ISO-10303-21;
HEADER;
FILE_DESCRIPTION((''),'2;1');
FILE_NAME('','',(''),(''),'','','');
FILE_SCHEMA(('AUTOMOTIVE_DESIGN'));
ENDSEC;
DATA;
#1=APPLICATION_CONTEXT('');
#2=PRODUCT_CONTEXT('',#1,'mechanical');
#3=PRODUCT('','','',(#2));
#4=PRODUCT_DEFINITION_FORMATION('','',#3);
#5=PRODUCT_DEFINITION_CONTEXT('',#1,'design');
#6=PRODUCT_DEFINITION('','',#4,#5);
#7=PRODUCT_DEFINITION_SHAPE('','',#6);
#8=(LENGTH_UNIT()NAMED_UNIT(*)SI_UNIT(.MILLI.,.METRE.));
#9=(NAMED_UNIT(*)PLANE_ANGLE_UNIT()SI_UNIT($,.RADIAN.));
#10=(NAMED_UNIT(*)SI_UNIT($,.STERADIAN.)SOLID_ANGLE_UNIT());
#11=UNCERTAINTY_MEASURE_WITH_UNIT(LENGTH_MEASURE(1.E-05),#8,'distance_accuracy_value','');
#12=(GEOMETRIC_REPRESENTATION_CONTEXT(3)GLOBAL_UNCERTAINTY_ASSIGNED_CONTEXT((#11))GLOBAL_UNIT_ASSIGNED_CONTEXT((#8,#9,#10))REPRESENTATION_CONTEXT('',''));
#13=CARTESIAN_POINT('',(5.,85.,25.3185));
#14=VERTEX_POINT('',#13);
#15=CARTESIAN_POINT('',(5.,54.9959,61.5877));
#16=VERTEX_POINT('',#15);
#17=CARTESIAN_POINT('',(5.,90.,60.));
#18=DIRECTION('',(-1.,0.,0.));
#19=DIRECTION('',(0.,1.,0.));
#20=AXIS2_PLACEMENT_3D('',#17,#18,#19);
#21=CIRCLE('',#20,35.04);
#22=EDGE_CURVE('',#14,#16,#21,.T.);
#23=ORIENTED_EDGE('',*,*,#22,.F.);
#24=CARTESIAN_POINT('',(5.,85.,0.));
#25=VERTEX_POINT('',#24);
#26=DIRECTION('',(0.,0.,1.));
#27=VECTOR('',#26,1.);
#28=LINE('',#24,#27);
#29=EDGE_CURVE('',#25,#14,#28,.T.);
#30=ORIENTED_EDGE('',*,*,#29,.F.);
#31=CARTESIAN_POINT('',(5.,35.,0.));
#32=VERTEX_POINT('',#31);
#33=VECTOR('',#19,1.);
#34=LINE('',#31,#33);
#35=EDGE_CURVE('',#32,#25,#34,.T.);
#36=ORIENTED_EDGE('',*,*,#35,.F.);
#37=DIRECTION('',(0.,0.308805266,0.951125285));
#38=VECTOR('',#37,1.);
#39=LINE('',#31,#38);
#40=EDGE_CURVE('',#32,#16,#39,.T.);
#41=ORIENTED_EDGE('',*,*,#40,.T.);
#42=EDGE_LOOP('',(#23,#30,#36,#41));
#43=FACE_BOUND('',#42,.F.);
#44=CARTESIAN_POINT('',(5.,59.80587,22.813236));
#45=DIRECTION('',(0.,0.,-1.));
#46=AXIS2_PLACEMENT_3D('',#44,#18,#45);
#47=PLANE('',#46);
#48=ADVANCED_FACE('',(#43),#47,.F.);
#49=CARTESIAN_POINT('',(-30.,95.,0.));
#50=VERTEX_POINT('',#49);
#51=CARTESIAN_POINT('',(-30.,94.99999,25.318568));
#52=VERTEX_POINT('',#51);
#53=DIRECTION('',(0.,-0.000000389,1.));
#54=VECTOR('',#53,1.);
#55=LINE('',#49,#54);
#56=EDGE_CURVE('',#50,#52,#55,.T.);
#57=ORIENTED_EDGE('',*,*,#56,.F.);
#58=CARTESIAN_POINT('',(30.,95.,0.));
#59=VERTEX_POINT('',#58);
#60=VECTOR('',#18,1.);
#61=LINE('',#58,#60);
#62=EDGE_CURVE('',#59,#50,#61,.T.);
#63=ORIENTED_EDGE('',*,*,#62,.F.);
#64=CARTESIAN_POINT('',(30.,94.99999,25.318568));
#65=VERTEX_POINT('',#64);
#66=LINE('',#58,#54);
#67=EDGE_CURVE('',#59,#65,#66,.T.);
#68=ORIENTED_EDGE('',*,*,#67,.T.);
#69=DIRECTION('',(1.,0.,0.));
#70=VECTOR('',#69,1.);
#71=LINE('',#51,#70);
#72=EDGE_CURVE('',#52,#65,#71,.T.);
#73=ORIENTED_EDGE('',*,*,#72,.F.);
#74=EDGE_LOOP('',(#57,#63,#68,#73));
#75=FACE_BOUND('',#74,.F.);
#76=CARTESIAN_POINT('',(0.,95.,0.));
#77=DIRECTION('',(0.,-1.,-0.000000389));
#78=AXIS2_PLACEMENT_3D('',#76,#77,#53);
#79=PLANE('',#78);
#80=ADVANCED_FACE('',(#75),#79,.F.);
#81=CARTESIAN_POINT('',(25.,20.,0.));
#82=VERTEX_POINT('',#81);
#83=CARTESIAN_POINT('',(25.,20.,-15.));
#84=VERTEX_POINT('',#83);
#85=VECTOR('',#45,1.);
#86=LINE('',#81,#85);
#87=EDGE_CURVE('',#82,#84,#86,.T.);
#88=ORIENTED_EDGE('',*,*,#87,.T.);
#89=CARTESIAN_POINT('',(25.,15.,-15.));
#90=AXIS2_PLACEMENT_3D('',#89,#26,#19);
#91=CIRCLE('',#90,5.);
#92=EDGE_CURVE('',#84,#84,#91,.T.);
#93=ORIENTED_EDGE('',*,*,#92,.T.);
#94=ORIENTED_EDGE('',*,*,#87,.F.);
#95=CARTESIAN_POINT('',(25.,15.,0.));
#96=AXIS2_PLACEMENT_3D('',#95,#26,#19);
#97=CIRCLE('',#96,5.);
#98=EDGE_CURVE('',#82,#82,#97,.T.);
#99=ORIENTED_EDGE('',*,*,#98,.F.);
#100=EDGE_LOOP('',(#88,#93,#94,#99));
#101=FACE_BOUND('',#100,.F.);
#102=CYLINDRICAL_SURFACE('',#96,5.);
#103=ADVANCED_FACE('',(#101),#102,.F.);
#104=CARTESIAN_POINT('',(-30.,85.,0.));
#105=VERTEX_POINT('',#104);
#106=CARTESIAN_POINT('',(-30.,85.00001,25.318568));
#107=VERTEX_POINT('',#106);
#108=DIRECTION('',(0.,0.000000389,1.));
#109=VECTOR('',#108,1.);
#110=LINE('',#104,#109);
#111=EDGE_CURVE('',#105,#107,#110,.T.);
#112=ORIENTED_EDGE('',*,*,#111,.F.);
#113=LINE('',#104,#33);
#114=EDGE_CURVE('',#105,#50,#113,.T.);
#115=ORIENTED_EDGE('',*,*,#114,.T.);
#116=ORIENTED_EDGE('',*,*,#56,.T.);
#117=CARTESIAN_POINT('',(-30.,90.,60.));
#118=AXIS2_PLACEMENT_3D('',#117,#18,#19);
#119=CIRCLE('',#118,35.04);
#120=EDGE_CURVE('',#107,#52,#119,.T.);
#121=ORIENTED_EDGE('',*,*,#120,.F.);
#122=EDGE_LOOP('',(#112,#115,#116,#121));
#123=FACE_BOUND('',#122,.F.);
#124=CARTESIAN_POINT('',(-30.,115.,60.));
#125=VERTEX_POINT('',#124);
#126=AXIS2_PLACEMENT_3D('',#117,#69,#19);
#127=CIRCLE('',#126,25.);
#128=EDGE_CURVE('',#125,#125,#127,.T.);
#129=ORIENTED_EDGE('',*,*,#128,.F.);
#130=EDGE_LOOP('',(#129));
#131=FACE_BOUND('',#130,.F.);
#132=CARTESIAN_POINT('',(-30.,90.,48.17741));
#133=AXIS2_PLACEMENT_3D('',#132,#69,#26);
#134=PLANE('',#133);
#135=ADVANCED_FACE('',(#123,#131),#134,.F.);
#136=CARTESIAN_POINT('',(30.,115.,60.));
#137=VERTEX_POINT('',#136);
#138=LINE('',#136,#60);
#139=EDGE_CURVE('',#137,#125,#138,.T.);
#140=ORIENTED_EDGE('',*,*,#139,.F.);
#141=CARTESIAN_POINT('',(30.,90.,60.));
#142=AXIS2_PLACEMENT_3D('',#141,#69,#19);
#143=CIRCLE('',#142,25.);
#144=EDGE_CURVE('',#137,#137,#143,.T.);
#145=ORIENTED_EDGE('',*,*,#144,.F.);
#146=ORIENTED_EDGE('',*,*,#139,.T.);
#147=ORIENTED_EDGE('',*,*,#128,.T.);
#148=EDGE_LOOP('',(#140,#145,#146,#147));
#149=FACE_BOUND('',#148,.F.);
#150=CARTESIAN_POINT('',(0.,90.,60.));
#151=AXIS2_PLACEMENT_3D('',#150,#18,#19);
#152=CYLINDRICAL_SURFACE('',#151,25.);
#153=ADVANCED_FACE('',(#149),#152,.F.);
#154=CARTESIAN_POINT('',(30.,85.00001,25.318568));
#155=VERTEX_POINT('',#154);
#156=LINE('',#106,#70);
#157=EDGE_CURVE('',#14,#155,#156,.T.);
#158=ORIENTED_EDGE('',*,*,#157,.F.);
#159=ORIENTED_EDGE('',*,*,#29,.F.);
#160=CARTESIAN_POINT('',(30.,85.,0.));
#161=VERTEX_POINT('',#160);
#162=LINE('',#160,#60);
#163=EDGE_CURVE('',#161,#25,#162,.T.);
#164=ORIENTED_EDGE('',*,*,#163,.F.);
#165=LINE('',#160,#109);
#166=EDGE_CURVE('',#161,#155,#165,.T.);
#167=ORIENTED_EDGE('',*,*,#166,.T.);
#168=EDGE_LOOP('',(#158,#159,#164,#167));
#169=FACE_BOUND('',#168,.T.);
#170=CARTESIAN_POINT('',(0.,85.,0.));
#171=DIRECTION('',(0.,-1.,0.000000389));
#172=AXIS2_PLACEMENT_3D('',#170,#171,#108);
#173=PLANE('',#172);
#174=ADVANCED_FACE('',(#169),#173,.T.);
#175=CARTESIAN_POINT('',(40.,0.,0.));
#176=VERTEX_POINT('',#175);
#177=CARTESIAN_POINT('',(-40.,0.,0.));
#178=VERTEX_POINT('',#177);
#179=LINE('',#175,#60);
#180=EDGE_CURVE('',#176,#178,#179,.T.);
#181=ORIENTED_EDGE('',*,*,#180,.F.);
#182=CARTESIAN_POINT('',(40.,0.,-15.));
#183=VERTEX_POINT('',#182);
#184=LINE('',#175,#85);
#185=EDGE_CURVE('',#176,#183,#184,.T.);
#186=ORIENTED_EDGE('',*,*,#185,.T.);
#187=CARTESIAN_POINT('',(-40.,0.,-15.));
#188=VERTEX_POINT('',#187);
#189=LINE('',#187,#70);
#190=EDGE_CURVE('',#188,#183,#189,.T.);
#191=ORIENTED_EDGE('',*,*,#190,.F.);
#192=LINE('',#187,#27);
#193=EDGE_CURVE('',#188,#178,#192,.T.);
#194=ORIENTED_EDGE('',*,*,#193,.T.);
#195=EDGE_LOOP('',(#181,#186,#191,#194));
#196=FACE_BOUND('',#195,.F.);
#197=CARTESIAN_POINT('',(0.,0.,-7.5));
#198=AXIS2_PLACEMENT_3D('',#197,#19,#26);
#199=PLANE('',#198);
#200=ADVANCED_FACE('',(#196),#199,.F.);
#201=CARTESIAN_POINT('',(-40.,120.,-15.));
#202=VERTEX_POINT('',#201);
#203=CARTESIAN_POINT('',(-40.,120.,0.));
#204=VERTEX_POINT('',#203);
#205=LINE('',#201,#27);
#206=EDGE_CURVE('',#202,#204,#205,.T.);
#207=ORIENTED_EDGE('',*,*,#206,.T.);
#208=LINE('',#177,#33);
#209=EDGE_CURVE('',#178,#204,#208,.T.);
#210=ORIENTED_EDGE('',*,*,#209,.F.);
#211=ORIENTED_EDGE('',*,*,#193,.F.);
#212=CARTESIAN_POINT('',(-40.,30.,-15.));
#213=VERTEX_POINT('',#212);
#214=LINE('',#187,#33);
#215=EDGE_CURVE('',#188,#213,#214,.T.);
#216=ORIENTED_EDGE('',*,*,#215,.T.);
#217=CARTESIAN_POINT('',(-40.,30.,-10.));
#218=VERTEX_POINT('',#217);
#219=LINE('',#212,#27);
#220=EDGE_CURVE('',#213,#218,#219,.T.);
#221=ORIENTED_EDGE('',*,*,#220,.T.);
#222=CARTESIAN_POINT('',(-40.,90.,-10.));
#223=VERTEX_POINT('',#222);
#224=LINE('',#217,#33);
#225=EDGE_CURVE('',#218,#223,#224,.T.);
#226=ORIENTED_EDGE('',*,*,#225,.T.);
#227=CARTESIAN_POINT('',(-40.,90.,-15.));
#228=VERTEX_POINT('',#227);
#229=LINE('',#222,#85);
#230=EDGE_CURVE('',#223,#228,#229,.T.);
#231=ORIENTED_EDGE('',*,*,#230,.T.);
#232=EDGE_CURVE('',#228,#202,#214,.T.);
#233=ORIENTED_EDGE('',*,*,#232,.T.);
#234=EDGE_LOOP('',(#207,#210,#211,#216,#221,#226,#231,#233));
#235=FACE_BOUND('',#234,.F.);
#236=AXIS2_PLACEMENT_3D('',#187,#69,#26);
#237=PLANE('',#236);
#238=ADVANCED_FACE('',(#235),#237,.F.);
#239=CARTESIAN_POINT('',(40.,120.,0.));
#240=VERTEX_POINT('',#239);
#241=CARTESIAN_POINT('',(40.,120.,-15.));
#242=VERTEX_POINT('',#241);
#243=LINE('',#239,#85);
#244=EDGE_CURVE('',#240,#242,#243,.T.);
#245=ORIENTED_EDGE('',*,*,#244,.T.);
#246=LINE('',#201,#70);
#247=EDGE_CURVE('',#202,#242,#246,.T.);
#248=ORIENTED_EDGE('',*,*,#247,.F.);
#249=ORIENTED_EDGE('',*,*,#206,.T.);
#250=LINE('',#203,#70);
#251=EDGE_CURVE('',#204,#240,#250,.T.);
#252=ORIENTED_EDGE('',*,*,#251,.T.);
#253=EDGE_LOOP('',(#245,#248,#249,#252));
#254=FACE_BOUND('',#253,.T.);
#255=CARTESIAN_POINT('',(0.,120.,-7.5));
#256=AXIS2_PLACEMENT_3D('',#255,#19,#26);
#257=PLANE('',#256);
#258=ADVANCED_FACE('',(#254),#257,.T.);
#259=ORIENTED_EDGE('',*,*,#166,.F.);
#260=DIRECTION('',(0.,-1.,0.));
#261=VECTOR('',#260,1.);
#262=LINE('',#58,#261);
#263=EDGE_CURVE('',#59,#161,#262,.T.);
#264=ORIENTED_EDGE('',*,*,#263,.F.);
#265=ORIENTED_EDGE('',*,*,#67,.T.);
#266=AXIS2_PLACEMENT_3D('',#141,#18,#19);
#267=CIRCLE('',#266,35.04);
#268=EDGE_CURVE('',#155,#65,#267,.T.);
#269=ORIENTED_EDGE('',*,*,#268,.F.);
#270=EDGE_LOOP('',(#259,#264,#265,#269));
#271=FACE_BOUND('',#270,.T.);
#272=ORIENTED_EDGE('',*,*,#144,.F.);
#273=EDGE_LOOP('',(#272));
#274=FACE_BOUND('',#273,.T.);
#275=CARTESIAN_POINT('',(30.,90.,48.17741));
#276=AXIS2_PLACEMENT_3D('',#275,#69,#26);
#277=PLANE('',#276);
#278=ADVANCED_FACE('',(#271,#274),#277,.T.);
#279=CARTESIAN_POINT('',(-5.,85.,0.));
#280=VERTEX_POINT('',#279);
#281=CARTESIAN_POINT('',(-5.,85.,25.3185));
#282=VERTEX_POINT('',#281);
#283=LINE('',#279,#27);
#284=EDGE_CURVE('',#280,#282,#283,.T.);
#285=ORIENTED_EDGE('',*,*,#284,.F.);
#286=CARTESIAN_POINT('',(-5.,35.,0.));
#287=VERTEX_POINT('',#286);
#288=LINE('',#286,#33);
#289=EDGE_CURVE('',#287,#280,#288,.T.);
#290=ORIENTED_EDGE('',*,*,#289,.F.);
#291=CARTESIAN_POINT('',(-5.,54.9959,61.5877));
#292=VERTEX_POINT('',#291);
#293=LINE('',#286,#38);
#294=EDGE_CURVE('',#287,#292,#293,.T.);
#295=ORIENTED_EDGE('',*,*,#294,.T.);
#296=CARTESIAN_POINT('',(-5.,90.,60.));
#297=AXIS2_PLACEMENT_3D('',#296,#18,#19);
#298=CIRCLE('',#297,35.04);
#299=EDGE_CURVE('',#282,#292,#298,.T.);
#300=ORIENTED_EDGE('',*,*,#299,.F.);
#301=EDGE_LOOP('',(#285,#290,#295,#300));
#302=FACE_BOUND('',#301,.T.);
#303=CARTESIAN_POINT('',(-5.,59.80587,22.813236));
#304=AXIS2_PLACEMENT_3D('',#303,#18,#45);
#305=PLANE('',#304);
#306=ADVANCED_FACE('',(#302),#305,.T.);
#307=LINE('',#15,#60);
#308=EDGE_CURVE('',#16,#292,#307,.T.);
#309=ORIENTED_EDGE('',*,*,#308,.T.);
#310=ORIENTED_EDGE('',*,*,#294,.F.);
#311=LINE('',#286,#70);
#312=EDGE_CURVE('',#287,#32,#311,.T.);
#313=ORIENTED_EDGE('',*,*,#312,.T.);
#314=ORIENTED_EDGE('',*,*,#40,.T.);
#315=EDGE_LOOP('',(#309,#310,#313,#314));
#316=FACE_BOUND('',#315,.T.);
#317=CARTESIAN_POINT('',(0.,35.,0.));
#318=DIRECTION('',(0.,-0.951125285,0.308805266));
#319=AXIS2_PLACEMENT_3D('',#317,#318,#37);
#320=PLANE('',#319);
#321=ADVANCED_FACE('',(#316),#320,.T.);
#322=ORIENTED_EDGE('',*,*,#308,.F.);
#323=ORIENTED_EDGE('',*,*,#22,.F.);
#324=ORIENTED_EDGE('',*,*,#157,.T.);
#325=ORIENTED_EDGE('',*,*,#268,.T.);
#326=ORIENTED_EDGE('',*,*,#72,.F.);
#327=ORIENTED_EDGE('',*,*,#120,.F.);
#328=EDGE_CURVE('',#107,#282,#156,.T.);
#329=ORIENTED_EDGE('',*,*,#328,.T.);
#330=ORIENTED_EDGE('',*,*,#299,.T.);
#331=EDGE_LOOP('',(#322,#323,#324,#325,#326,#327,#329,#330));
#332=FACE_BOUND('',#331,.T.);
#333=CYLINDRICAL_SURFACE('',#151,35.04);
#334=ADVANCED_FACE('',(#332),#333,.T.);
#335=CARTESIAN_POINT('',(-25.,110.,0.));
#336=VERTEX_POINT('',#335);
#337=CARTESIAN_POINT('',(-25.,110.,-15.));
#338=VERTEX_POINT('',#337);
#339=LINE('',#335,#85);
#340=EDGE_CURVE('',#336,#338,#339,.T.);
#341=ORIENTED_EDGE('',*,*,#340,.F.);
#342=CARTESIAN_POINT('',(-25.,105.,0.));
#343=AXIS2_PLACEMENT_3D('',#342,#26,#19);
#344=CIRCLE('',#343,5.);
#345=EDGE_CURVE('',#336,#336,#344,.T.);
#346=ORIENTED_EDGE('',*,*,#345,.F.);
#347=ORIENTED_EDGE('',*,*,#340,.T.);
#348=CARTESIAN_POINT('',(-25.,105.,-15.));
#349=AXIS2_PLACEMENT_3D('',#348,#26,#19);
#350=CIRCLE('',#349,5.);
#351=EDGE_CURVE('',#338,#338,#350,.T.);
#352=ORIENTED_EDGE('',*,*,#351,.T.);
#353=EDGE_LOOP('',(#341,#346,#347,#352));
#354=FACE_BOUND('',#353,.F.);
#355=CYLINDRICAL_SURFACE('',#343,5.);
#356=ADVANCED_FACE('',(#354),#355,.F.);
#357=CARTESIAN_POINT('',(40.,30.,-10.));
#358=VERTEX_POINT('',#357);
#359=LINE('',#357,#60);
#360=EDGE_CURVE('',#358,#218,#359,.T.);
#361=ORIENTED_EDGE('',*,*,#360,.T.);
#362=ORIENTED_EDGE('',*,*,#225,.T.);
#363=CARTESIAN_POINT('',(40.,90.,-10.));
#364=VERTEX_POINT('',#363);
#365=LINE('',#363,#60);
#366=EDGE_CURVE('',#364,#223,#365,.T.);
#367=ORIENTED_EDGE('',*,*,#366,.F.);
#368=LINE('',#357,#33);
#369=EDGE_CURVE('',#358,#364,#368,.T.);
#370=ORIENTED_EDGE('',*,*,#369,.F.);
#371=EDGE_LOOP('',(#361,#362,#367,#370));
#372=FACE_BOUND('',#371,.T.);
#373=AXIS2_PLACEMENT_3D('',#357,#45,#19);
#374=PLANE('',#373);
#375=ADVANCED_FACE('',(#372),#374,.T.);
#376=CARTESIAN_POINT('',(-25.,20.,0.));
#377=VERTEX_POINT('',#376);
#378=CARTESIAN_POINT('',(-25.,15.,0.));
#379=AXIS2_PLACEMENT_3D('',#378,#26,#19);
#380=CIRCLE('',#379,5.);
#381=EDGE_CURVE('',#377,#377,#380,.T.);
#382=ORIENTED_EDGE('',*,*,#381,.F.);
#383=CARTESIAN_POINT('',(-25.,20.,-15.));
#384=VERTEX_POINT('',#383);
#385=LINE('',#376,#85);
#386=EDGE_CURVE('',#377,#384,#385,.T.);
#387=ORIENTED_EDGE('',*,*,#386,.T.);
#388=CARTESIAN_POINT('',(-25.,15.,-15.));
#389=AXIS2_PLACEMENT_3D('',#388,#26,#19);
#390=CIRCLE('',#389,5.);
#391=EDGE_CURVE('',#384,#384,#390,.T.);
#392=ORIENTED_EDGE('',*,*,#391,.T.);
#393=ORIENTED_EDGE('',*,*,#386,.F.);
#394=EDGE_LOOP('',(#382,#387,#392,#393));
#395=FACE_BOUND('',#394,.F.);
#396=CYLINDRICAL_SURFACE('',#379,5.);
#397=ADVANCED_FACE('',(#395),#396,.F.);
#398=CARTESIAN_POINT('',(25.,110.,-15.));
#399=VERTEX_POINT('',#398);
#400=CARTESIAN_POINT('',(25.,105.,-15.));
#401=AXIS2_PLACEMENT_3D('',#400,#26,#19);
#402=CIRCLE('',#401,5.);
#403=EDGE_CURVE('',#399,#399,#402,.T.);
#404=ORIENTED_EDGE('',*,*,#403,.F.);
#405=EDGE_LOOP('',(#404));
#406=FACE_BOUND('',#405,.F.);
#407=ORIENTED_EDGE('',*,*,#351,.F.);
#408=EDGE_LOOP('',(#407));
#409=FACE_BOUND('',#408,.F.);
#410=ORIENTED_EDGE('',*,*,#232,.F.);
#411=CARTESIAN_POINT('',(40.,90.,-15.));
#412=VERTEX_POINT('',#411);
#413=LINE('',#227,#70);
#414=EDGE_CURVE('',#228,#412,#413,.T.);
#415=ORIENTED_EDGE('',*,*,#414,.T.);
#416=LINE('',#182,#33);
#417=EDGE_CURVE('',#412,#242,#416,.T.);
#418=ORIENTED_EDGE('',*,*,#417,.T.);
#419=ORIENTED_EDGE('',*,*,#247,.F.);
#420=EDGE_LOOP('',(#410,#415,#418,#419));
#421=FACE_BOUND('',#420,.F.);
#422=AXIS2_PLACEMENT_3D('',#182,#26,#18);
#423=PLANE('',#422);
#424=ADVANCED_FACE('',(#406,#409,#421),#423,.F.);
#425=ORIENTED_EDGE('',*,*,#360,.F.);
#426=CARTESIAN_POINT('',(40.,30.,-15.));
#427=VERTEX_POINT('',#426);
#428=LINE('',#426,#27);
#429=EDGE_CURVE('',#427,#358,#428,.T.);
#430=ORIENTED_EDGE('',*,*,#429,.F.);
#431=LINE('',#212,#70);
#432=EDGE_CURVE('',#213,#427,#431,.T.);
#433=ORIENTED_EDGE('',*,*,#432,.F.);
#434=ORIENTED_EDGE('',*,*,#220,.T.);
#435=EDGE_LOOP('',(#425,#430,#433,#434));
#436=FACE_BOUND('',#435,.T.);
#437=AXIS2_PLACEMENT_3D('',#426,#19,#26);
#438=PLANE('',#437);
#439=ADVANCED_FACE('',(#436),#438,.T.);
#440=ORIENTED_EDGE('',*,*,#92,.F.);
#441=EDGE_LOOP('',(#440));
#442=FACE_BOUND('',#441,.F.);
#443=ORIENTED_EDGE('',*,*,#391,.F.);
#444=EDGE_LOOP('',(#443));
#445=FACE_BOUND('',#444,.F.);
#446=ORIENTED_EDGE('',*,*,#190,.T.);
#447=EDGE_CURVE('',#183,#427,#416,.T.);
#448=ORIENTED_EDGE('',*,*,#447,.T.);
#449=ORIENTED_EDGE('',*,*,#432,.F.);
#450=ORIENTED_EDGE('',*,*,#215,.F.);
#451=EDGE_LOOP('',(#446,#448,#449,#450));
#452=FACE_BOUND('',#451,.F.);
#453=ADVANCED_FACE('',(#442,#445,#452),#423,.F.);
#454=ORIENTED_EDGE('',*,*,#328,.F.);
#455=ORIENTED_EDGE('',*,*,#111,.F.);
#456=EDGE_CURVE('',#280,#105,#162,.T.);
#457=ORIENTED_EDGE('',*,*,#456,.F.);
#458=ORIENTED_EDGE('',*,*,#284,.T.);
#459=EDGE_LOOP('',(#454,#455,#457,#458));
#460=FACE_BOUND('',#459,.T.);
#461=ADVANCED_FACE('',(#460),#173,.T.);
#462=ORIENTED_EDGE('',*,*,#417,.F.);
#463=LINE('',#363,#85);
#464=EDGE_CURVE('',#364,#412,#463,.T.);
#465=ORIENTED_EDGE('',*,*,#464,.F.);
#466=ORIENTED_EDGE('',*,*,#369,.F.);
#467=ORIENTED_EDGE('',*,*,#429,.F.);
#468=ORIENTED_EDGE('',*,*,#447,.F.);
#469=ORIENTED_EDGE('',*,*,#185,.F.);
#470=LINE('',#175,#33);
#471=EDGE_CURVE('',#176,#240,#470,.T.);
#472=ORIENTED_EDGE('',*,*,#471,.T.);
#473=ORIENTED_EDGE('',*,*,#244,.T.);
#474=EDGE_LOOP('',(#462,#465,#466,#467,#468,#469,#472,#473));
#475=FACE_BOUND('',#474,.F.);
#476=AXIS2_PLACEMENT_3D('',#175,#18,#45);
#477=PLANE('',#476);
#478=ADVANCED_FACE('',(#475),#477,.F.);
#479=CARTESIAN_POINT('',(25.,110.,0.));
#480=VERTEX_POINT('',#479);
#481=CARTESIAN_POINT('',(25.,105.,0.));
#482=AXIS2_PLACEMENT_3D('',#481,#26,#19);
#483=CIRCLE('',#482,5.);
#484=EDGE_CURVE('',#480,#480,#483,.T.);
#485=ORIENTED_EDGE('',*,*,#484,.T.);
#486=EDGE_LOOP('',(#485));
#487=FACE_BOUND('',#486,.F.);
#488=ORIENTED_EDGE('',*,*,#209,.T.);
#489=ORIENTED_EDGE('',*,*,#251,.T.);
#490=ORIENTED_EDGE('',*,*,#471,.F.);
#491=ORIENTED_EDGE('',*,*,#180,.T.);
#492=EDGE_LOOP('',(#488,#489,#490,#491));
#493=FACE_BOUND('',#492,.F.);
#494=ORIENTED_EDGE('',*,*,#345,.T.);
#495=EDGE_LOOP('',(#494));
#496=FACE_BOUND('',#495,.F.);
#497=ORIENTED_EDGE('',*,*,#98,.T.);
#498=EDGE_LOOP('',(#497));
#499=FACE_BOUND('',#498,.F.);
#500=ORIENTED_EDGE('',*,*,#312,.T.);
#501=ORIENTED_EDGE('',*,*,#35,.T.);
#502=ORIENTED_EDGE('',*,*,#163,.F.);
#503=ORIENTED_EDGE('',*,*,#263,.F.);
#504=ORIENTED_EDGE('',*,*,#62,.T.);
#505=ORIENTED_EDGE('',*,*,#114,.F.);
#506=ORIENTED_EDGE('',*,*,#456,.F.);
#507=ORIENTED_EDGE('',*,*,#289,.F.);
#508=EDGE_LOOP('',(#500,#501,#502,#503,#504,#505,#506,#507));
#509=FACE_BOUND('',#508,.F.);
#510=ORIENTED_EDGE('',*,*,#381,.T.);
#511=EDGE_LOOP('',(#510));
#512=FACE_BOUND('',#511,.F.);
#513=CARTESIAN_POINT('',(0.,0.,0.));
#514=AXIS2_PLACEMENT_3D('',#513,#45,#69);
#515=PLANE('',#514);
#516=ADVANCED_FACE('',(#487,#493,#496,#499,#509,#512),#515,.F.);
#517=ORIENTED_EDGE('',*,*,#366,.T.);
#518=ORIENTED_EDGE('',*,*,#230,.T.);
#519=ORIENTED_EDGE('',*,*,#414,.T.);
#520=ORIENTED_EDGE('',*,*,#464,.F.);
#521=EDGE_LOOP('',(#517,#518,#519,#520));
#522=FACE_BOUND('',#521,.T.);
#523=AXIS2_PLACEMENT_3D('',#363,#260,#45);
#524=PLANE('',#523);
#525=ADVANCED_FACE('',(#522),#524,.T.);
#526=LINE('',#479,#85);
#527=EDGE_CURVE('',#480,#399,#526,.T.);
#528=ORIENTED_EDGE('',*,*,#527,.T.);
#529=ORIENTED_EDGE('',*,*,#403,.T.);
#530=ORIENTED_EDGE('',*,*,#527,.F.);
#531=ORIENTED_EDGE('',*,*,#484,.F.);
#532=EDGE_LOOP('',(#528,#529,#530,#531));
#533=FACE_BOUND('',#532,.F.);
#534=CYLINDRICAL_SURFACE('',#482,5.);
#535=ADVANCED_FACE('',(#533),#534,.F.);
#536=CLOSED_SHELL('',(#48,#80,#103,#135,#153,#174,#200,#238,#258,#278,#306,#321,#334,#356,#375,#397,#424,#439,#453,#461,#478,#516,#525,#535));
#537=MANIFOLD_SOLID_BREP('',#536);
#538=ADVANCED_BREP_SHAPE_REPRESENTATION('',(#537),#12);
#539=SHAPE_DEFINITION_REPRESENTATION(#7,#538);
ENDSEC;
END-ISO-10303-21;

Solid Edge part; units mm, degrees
sketch "Sketch1" plane through (0, 0, 0) normal (0, -1, 0) x (1, 0, 0)
  line L0 (40, 0) -> (40, -15)
  line L1 (40, -15) -> (0, -15)
  line L2 (0, -15) -> (-40, -15)
  line L3 (-40, -15) -> (-40, 0)
  line L4 (-40, 0) -> (0, 0)
  line L5 (0, 0) -> (40, 0)
extrude "Protrusion1" add sketch "Sketch1" against normal blind 120
sketch "Sketch2" plane through (40, 60, -7.5) normal (1, 0, 0) x (0, 1, 0)
  line L0 (-30, -2.5) -> (30, -2.5)
  line L1 (30, -2.5) -> (30, -7.5)
  line L2 (30, -7.5) -> (-30, -7.5)
  line L3 (-30, -7.5) -> (-30, -2.5)
extrude "ExtrudedCutout_1" cut sketch "Sketch2" against normal blind 80
sketch "Sketch3" plane through (0, 0, 0) normal (1, 0, 0) x (0, 1, 0)
  line L0 (95, 0) -> (95, 25.3185)
  line L1 (90, 0) -> (95, 0)
  line L2 (85, 0) -> (90, 0)
  line L3 (85, 0) -> (85, 25.3185)
  arc A0 (85, 25.3185) -> (95, 25.3185) centre (90, 60) cw
extrude "ExtrudedProtrusion_2" add sketch "Sketch3" along normal mid plane 60
sketch "Sketch4" plane through (0, 0, 0) normal (1, 0, 0) x (0, 1, 0)
  circle A0 centre (90, 60) radius 25
extrude "ExtrudedCutout_2" cut sketch "Sketch4" along normal mid plane 60
sketch "Sketch5" plane through (0, 0, 0) normal (1, 0, 0) x (0, 1, 0)
  line L0 (35, 0) -> (54.9959, 61.5877)
  line L1 (55.034, 61.5417) -> (54.9959, 61.5877)
  line L2 (85, 25.3185) -> (84.962, 25.3645)
  line L3 (85, 0) -> (85, 25.3185)
  line L4 (35, 0) -> (85, 0)
  arc A0 (84.962, 25.3645) -> (55.034, 61.5417) centre (90, 60) cw
extrude "ExtrudedProtrusion_3" add sketch "Sketch5" along normal mid plane 10
sketch "Sketch6" plane through (0, 60, 0) normal (0, 0, 1) x (0, 1, 0)
  circle A0 centre (-45, -25) radius 5
extrude "ExtrudedCutout_3" cut sketch "Sketch6" against normal blind 15
sketch "Sketch7" plane through (0, 60, 0) normal (0, 0, 1) x (0, 1, 0)
  circle A0 centre (-45, 25) radius 5
extrude "ExtrudedCutout_4" cut sketch "Sketch7" against normal blind 15
sketch "Sketch8" plane through (0, 60, 0) normal (0, 0, 1) x (0, 1, 0)
  circle A0 centre (45, -25) radius 5
extrude "ExtrudedCutout_5" cut sketch "Sketch8" against normal blind 15
sketch "Sketch9" plane through (0, 60, 0) normal (0, 0, 1) x (0, 1, 0)
  circle A0 centre (45, 25) radius 5
extrude "ExtrudedCutout_6" cut sketch "Sketch9" against normal blind 15
